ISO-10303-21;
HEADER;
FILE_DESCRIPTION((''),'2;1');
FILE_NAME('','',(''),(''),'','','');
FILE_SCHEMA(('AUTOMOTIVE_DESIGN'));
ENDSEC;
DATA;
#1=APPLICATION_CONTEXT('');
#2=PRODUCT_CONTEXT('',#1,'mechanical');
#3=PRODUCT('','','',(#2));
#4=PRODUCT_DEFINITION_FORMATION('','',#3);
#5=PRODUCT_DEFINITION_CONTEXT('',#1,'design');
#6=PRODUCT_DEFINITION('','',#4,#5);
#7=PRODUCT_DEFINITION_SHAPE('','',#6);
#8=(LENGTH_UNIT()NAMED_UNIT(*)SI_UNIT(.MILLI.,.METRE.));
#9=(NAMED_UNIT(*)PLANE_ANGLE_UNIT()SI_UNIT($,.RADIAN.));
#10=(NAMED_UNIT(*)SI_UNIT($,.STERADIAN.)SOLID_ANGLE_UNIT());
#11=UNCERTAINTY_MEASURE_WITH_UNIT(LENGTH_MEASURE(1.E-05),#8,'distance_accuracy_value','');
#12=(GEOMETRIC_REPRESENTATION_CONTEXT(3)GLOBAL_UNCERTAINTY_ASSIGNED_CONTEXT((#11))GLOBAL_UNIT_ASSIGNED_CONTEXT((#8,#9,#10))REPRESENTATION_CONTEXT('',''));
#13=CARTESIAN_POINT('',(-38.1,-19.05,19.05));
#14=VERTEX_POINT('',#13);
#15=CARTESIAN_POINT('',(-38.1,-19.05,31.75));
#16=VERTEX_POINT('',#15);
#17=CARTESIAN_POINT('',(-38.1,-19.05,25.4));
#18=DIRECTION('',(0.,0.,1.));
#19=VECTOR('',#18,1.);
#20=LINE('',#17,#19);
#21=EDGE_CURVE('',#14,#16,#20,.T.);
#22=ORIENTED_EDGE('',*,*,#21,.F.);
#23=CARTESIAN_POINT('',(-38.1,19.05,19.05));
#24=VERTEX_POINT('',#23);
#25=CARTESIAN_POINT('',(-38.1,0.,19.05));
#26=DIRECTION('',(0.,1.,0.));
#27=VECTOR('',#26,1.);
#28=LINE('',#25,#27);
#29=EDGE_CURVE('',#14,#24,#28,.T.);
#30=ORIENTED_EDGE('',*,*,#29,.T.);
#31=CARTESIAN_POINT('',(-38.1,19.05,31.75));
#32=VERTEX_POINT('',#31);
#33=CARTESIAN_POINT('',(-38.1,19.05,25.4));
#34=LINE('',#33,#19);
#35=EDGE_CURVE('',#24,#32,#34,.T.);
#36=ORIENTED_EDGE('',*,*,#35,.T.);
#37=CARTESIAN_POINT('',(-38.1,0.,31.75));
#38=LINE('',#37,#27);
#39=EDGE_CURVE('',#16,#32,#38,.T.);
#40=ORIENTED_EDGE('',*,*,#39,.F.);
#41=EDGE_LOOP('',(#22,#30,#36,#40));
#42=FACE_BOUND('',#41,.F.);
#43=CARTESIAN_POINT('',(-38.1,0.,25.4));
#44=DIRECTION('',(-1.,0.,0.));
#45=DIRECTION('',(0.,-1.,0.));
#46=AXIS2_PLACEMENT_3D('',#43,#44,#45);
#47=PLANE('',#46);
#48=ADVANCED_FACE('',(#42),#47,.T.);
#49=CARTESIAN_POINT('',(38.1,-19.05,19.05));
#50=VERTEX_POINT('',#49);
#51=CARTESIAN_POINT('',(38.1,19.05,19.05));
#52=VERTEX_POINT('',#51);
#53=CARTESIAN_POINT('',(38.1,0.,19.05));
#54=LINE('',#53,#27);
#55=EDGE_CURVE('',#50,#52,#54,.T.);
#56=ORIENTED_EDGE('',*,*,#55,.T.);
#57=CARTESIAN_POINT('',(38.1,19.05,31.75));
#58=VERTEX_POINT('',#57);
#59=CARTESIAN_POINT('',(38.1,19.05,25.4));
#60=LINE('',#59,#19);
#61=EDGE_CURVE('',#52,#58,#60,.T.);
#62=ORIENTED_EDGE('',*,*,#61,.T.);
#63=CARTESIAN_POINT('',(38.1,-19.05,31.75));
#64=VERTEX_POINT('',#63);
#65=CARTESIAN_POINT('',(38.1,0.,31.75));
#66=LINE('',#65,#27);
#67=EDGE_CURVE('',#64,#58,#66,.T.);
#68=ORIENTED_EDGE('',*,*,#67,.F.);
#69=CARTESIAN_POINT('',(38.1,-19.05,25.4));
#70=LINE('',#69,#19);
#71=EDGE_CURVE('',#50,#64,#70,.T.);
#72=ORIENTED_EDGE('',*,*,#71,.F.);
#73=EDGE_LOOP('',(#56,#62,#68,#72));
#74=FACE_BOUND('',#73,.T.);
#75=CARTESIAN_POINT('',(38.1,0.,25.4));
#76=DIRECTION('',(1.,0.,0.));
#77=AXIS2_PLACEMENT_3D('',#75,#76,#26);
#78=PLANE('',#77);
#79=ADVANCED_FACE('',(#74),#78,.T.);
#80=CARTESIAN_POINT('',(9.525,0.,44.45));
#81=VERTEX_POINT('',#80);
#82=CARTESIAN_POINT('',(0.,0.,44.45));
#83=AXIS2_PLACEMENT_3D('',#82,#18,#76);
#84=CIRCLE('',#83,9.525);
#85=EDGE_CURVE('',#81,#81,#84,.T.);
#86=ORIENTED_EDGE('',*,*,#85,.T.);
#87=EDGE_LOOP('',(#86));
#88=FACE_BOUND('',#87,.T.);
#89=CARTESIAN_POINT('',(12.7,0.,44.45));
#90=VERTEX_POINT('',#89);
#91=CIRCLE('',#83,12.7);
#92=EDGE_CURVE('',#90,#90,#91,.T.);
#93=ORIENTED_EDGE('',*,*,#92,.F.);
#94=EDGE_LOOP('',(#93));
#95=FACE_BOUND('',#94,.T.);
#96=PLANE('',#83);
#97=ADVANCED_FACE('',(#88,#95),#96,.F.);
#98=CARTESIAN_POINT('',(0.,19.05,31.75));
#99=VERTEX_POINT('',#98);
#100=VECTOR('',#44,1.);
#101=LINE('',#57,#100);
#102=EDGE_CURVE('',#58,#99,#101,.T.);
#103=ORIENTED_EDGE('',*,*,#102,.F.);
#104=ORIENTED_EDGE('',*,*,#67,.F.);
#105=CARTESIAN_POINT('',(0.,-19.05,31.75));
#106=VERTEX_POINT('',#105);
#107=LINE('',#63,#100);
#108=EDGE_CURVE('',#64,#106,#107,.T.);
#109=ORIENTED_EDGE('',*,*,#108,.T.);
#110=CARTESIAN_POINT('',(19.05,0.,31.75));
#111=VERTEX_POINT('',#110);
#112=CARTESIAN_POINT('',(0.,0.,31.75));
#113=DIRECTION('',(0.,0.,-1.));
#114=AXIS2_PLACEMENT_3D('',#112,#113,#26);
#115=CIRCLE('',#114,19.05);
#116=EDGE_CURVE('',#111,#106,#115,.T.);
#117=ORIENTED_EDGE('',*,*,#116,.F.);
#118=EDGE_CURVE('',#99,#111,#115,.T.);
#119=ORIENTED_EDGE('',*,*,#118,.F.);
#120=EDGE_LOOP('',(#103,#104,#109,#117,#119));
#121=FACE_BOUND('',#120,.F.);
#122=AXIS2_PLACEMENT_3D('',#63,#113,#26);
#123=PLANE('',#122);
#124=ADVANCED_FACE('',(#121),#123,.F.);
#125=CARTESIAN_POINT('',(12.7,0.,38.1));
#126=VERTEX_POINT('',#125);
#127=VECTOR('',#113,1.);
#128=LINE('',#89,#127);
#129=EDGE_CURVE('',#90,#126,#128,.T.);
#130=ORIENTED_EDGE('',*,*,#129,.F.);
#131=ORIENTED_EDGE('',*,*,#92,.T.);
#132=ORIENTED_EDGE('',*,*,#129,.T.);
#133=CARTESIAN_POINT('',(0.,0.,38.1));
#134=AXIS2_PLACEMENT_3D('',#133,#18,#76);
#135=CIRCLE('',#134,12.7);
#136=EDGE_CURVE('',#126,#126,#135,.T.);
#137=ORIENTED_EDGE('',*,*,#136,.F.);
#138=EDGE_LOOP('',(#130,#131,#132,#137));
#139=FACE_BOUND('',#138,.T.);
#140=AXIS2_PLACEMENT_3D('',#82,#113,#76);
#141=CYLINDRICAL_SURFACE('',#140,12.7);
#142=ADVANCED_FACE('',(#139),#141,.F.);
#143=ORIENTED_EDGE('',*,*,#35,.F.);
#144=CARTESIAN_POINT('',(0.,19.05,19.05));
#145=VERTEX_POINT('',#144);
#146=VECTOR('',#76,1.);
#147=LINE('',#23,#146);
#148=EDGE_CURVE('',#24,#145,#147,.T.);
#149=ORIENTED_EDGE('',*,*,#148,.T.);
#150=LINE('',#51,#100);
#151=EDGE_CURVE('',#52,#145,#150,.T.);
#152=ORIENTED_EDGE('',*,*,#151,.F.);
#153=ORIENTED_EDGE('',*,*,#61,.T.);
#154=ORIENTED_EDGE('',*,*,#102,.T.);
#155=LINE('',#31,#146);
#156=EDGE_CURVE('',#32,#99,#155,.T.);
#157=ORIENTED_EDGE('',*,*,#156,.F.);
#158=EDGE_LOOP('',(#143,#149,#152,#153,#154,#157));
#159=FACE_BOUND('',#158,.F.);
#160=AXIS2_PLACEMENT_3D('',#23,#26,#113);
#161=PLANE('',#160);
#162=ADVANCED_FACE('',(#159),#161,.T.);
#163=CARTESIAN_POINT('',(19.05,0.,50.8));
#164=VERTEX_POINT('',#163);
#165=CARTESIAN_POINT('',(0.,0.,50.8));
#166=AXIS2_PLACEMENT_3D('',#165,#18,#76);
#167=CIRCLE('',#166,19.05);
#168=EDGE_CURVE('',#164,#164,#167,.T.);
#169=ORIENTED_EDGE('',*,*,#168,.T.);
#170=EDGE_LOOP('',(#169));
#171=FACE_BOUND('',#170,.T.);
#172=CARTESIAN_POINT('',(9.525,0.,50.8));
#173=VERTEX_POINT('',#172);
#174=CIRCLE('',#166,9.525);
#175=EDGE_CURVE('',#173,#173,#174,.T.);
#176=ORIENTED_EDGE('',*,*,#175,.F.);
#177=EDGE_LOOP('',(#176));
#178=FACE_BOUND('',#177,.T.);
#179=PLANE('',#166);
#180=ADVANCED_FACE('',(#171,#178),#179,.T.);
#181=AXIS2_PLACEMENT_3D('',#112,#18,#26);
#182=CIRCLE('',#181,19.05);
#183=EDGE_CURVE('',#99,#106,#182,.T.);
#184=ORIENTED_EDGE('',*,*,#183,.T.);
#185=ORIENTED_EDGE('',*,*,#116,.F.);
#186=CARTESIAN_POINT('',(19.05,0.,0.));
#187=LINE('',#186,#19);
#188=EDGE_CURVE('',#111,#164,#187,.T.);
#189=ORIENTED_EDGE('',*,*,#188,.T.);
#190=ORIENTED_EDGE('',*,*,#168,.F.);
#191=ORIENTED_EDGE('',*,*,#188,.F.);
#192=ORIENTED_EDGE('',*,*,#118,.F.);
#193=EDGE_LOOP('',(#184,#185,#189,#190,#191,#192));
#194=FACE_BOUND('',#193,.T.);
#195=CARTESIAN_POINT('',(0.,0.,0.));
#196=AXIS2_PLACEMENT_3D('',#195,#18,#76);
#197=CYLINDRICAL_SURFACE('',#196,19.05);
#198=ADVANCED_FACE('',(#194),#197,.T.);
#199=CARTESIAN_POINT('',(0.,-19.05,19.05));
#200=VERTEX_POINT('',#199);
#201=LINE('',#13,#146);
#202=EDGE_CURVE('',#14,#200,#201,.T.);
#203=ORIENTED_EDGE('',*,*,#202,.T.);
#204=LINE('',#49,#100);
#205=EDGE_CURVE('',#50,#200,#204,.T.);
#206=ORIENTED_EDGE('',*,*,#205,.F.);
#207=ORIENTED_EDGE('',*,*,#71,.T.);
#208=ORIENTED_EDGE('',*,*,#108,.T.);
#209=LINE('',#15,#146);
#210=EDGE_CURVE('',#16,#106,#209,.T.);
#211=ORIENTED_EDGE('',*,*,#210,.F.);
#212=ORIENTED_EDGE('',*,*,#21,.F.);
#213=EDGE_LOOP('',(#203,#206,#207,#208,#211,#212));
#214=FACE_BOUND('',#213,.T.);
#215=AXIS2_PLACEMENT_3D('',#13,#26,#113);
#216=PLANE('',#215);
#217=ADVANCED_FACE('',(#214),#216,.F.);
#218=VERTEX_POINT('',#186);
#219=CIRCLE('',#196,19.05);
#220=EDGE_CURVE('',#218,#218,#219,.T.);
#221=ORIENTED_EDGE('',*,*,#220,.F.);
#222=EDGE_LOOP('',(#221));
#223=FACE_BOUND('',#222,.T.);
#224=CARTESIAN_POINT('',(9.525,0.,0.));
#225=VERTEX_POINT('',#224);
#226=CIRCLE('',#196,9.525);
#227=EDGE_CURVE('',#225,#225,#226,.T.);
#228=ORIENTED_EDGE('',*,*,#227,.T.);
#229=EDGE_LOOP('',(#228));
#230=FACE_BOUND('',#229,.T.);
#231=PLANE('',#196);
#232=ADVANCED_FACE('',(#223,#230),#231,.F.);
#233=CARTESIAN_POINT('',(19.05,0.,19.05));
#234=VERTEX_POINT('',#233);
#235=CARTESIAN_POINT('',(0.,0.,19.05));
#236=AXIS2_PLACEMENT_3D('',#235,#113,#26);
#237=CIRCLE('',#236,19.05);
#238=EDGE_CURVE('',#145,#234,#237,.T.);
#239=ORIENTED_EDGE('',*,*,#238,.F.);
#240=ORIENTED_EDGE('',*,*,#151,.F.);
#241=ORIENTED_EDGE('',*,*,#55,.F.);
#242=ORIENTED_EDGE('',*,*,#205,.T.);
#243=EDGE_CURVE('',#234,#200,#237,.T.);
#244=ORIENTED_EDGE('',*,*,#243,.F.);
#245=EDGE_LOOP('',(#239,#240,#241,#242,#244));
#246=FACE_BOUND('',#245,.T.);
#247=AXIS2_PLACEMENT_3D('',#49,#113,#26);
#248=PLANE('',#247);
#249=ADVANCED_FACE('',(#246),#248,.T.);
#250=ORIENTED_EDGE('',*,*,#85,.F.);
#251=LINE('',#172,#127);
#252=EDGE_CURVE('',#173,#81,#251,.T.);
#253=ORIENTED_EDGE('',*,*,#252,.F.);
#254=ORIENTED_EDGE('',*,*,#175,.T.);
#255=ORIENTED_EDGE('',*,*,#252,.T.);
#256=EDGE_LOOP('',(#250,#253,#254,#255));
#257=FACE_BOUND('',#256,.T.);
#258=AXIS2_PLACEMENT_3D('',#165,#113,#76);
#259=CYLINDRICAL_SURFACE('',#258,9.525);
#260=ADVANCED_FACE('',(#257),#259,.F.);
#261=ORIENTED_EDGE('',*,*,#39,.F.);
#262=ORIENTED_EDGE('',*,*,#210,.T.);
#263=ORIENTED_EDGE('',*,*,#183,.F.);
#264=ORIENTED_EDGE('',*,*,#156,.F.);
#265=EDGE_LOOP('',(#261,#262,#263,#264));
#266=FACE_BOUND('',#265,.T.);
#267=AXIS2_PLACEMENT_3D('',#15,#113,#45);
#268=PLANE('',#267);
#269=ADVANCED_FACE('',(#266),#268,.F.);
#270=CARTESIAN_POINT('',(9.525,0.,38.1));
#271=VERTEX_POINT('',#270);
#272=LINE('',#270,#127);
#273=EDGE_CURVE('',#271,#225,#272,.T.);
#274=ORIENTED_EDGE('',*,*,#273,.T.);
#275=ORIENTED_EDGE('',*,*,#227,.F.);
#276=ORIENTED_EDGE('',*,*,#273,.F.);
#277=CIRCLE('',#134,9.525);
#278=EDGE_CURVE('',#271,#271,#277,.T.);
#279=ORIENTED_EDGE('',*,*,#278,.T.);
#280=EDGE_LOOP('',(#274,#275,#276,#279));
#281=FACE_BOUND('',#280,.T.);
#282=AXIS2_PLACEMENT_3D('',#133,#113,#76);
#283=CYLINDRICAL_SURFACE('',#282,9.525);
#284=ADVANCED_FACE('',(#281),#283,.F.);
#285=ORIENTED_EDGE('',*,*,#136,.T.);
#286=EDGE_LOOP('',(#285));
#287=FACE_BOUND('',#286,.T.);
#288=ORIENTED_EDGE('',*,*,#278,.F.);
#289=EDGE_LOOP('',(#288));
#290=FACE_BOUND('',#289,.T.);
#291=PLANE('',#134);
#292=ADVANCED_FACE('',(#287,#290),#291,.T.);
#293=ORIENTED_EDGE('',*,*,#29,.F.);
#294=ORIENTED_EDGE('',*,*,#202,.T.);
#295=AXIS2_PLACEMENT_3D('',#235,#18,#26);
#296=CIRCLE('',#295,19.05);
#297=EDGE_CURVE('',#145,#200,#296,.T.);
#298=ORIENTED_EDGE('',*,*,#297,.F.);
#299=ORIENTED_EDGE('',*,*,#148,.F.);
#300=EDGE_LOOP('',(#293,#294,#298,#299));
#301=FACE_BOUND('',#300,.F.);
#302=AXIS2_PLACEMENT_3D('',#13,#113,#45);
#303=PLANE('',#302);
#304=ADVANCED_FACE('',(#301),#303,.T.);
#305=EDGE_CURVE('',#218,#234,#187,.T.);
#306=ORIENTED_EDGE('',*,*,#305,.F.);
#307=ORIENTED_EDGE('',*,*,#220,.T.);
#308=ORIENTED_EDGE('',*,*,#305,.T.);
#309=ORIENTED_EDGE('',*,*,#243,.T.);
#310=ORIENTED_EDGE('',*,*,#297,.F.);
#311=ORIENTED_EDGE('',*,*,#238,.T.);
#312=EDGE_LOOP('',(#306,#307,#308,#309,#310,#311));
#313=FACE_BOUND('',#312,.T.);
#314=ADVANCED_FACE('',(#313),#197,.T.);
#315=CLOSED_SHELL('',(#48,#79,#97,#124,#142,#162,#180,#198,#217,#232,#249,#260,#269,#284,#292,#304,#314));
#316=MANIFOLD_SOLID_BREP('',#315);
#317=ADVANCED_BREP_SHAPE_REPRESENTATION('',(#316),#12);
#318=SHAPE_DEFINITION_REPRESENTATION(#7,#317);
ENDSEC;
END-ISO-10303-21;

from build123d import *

# Parameters (mm, degrees)
F3_W = 38.1
F3_H = 12.7


# Not quite as in the source:
# - a pattern or mirror of a feature is missing from the dataset's text; its kind, count and spacing are read off the source's solid


with BuildPart() as f1:
    # F0 (on Front) → F1 (revolve)
    with BuildSketch(Plane.XZ):
        Polygon((9.525, 38.1), (9.525, 0), (19.05, 0), (19.05, 50.8), (9.525, 50.8), (9.525, 44.45), (12.7, 44.45), (12.7, 38.1), align=None)
    revolve(axis=Axis((0, 0, 18.9327914268), (0, 0, 1)))

    # F3 (on offset) → F4 (join, up to the next surface of F1)
    with BuildSketch(Plane.YZ.offset(38.1)):
        with Locations((0, 25.4)):
            Rectangle(F3_W, F3_H)
    f4 = extrude(until=Until.NEXT, dir=(-1, 0, 0))

    # F4_copies: F4 across plane
    add(f4.mirror(Plane(origin=(0, 0, 0), x_dir=(0, 0, -1), z_dir=(-1, 0, 0))))


solid = f1.part
